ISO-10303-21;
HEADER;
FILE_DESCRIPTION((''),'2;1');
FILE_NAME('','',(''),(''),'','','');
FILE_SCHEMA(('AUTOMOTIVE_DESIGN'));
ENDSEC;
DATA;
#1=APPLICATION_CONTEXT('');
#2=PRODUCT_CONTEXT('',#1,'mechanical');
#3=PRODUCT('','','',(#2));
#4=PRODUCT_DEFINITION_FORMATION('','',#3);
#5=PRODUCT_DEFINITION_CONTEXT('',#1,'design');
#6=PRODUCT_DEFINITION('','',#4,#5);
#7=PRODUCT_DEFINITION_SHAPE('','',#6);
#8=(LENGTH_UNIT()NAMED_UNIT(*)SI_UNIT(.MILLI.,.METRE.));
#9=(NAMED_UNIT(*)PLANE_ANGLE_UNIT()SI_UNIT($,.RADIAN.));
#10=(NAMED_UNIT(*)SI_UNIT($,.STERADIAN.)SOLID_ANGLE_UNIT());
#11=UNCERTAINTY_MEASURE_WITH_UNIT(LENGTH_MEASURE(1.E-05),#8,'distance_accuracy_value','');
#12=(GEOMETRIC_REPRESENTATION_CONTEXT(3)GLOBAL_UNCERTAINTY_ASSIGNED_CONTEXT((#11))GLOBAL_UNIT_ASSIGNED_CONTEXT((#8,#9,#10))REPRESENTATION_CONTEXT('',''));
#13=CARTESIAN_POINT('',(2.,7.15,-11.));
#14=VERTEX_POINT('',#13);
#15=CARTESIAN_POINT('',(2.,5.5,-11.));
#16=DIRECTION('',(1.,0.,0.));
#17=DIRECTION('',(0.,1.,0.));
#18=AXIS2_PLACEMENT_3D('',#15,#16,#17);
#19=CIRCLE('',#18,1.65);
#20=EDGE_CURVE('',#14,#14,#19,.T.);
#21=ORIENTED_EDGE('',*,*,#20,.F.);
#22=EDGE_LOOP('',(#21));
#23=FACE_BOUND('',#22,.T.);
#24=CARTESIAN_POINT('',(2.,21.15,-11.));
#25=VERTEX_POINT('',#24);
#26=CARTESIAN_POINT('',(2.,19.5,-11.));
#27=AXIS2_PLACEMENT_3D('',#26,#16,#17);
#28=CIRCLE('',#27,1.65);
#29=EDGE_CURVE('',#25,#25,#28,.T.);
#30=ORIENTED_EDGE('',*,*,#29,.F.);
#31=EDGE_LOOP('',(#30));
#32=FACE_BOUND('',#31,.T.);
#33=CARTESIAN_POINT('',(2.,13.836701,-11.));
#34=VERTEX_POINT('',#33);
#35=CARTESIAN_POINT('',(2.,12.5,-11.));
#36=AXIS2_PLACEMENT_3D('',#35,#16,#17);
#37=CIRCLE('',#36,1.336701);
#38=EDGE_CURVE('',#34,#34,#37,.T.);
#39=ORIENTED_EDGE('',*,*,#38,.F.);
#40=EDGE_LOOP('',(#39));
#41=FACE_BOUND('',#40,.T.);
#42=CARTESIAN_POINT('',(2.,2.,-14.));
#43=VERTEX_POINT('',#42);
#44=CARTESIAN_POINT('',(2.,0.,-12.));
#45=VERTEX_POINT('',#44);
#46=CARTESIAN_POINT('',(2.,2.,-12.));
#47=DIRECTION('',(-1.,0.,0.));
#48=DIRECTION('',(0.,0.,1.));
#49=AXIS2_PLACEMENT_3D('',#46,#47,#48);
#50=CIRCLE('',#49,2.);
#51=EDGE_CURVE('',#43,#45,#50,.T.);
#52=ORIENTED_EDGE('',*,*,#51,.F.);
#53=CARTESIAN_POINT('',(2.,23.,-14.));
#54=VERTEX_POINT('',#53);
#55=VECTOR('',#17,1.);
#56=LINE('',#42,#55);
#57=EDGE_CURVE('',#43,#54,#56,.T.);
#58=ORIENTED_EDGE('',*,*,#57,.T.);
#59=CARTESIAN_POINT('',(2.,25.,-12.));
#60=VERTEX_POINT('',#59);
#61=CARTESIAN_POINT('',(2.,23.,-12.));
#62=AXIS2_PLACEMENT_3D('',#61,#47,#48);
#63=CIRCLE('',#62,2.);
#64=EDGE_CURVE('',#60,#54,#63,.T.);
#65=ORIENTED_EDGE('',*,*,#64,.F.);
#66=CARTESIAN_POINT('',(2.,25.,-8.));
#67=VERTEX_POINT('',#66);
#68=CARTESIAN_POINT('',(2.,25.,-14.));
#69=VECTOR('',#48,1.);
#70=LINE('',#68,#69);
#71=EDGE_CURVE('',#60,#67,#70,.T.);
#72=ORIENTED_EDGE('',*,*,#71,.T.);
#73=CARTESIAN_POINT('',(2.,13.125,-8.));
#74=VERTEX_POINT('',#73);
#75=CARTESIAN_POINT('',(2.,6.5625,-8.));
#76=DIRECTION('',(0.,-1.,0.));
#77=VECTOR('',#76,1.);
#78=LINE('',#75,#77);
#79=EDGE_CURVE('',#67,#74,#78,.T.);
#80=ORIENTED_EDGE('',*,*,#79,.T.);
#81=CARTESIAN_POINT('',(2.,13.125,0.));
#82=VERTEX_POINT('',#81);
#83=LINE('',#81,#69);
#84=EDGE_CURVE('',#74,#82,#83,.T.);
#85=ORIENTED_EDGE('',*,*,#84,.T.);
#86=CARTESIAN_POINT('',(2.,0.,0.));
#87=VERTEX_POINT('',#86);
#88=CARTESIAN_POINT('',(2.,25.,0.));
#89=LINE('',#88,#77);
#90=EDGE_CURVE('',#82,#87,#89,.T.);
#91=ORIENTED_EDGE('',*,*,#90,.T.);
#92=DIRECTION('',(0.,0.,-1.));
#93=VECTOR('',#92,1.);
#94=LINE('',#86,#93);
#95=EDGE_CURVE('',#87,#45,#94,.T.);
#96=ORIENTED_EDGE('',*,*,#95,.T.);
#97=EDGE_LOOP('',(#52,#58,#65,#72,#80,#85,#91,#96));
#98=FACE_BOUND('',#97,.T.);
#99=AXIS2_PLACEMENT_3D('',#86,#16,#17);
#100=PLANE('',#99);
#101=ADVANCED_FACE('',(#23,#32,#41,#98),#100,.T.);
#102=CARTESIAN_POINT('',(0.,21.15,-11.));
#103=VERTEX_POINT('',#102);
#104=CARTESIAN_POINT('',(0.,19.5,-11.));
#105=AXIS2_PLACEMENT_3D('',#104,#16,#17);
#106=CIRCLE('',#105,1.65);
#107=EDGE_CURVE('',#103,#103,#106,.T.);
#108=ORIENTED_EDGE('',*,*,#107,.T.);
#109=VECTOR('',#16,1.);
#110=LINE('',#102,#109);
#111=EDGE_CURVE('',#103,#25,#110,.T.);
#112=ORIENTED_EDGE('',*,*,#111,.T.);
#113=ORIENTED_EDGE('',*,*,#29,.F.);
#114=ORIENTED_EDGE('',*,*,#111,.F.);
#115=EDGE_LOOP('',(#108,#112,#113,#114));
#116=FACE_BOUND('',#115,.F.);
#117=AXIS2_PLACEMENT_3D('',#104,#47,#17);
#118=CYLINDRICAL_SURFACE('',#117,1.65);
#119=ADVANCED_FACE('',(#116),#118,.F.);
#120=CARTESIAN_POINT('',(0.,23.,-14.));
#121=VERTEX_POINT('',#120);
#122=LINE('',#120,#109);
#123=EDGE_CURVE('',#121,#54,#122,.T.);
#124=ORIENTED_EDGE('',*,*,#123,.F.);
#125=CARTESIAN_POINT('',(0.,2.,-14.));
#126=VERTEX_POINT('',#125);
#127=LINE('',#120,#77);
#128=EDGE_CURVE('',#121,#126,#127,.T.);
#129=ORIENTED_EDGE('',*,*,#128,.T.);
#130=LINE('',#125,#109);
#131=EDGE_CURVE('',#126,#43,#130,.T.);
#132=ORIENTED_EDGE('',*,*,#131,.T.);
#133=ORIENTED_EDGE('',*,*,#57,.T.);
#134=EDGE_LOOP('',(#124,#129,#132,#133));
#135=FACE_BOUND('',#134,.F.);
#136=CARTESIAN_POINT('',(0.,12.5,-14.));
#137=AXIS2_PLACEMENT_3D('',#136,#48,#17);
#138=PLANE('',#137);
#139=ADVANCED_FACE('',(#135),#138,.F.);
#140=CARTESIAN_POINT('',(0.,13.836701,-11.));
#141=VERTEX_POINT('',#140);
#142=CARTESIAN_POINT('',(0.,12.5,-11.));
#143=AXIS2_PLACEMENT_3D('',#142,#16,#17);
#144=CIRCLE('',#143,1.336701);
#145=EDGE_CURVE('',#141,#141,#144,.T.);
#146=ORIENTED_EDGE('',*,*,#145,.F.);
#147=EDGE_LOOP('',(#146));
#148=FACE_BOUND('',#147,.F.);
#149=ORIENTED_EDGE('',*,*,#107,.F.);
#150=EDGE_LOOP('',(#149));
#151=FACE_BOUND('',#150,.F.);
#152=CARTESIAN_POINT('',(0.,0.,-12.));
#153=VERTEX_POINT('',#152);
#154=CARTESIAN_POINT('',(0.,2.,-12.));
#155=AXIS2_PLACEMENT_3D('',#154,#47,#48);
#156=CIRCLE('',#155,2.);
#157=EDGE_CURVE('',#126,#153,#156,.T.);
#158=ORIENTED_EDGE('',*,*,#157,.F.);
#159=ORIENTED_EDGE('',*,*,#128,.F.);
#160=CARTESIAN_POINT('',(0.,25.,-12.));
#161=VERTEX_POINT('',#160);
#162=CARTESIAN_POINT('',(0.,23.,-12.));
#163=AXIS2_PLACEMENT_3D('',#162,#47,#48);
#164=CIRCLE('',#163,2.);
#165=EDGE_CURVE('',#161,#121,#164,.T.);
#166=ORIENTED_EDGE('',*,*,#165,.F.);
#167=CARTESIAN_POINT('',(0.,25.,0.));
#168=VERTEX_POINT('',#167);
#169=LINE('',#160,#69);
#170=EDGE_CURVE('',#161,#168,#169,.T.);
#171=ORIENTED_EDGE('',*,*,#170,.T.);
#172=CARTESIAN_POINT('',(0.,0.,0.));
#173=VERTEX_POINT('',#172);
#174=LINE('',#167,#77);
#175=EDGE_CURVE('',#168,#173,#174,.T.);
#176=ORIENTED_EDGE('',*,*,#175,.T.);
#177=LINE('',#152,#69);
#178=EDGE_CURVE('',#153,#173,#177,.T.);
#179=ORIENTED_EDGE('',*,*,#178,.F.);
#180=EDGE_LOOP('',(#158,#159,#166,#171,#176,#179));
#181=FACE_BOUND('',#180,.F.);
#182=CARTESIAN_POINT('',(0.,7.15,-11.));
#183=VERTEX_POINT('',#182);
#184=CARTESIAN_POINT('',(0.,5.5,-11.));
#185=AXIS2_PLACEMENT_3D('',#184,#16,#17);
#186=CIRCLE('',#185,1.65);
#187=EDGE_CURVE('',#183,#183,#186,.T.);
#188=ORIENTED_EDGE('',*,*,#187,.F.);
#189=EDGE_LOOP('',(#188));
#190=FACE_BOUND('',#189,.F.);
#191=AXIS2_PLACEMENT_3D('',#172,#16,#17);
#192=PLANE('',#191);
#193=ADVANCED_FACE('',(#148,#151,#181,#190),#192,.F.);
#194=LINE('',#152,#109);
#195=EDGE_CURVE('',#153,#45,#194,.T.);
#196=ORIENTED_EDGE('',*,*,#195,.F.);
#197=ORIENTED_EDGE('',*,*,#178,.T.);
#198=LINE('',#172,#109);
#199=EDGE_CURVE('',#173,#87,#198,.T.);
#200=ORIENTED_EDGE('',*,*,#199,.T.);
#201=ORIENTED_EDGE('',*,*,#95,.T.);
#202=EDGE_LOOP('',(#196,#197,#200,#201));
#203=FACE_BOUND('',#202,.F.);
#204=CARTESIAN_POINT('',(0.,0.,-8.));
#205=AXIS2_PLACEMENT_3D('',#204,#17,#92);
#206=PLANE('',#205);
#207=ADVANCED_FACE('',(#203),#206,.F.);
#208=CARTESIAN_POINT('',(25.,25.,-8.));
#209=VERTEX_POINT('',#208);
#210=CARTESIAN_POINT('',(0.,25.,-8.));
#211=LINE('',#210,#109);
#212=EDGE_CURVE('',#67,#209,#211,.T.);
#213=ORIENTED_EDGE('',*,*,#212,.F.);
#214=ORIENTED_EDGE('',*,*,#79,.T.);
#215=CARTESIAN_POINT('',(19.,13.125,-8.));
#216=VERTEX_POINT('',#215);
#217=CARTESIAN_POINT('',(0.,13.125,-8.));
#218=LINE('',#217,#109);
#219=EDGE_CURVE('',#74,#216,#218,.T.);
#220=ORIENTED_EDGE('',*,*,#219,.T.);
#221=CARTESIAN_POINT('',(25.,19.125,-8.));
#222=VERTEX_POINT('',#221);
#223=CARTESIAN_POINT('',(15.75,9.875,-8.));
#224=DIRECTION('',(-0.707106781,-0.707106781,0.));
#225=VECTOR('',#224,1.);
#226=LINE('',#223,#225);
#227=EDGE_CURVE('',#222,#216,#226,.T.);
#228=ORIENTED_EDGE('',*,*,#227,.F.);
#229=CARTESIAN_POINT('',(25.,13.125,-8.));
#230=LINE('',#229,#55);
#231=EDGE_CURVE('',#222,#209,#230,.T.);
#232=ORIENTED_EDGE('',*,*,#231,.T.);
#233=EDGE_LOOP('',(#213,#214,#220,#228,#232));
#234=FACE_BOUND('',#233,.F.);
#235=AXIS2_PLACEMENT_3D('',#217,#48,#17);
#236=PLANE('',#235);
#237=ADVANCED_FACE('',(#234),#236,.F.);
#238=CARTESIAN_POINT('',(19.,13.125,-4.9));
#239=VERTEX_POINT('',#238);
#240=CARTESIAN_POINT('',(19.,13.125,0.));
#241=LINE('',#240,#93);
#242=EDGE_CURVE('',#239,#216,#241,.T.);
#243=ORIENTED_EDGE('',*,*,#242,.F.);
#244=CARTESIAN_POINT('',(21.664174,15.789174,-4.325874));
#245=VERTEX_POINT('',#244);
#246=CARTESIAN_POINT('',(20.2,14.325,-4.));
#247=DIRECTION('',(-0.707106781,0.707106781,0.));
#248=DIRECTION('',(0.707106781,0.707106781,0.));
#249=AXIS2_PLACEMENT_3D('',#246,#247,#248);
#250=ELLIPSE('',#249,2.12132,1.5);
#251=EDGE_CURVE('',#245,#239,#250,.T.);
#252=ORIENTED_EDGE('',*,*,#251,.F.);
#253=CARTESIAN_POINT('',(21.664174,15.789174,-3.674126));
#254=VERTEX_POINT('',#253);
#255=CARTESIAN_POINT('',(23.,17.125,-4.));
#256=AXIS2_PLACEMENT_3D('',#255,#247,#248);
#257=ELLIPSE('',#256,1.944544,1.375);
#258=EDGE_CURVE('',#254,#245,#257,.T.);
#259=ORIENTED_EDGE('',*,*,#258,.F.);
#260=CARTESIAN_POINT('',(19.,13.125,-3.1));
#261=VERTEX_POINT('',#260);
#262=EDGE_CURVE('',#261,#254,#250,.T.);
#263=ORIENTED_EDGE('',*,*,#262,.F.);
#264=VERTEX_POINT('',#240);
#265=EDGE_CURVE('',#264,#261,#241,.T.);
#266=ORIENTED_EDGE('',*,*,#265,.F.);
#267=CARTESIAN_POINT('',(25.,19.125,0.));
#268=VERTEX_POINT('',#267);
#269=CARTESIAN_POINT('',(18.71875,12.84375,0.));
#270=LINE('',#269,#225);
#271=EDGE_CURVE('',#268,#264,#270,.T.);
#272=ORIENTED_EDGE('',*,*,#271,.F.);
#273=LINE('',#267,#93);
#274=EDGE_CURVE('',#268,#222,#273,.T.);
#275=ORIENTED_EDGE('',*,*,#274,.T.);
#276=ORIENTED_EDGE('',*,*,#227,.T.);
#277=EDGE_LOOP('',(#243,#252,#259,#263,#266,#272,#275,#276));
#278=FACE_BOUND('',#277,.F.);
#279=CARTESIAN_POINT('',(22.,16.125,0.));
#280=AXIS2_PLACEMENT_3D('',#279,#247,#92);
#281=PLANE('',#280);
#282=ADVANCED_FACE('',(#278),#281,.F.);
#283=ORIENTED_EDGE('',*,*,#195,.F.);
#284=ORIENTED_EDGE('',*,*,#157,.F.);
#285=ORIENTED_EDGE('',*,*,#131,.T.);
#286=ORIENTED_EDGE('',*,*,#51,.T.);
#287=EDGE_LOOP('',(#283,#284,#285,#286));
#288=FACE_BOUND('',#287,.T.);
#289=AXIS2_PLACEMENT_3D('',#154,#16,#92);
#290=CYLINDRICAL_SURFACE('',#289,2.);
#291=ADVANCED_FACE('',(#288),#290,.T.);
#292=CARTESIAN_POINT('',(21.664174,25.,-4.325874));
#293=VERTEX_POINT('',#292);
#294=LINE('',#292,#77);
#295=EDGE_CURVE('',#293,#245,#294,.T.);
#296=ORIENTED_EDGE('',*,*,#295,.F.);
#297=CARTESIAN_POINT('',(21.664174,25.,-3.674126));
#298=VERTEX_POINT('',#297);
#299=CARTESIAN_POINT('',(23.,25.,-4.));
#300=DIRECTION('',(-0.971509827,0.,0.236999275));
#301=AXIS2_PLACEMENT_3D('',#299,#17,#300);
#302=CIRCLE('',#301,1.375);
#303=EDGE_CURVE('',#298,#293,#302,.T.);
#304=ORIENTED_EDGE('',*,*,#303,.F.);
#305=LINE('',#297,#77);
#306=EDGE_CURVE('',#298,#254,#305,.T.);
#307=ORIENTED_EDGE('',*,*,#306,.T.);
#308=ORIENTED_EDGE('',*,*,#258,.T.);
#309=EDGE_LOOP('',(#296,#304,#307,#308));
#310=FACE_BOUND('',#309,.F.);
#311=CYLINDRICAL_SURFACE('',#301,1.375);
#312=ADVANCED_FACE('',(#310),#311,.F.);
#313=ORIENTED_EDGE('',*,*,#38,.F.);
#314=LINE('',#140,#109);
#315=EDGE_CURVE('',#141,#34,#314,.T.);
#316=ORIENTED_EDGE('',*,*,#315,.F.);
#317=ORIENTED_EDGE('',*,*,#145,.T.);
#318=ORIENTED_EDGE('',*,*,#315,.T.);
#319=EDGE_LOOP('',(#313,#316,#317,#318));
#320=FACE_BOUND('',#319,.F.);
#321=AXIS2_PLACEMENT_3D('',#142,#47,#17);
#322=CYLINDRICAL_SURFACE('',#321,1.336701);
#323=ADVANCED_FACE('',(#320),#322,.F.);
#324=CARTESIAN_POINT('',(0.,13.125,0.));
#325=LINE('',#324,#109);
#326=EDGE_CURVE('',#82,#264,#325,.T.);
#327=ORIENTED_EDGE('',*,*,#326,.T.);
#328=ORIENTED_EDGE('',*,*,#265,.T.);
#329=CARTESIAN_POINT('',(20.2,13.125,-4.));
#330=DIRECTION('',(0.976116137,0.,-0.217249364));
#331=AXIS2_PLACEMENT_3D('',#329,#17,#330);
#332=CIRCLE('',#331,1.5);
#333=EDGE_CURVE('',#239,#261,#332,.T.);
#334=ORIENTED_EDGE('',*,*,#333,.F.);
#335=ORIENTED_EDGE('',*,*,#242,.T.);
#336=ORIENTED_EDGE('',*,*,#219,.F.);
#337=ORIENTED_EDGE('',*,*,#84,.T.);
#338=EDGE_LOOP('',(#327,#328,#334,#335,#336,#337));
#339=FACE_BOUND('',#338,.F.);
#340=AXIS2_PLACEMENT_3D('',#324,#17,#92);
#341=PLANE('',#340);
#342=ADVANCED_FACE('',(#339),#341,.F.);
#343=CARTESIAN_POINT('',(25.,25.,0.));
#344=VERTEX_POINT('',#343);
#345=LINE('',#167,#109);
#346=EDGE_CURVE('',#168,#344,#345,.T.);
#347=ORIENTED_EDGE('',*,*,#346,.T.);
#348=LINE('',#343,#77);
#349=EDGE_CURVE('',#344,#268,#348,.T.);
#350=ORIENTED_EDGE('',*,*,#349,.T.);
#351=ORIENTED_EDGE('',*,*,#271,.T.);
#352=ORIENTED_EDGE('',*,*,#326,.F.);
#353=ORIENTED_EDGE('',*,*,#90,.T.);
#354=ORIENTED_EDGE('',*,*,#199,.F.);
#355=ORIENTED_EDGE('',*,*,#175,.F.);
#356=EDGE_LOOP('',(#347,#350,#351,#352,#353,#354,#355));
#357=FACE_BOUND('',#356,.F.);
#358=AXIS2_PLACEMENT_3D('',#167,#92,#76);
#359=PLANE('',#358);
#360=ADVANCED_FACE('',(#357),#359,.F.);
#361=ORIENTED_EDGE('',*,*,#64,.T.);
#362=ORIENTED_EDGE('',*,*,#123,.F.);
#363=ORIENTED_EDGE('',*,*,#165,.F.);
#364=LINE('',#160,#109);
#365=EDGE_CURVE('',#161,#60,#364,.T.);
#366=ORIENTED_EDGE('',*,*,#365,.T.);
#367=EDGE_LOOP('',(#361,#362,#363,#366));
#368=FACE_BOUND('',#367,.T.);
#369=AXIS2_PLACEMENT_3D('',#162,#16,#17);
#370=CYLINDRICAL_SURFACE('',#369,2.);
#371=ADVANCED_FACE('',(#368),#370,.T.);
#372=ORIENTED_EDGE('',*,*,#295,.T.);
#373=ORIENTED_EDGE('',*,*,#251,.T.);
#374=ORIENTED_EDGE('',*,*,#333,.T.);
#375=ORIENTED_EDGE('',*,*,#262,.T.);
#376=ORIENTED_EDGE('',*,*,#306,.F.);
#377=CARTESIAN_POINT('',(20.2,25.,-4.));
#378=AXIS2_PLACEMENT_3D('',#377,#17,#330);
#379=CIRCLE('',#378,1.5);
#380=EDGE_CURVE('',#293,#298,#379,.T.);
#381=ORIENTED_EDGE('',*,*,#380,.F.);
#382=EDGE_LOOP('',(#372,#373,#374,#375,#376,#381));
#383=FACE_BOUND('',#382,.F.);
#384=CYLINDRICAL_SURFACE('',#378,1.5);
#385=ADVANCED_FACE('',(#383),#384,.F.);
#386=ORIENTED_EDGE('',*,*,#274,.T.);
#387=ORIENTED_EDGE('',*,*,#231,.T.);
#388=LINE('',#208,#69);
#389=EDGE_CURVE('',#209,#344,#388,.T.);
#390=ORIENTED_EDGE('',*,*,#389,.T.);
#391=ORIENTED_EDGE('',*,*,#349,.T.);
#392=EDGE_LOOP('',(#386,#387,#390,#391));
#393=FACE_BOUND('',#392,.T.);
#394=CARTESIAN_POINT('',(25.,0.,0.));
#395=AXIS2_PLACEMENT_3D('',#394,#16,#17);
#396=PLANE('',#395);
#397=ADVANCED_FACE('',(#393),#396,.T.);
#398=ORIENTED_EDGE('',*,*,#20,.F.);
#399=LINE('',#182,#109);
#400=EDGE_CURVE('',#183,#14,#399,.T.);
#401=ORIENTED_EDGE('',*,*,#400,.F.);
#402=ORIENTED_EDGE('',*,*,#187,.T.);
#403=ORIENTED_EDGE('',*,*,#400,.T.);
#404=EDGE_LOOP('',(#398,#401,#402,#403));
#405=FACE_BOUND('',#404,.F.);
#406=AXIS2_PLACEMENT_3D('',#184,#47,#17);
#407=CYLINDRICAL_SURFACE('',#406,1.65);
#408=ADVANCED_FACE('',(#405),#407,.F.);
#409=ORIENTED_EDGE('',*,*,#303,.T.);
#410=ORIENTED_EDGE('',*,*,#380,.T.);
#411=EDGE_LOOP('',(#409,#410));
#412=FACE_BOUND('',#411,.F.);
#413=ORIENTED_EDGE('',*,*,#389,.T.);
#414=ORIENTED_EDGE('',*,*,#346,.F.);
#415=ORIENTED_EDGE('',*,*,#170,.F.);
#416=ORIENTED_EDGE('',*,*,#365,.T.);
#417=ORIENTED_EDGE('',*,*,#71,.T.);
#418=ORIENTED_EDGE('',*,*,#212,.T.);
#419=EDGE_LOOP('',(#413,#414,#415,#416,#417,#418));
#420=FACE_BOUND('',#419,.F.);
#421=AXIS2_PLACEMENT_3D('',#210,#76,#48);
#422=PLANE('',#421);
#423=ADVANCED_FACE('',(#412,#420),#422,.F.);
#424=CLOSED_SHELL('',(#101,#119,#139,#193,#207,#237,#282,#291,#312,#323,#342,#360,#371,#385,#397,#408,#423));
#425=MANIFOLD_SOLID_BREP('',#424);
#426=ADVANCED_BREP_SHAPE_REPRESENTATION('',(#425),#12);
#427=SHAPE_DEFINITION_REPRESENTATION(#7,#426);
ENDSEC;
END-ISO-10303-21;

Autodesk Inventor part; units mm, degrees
ref_plane "YZ Plane" through (0, 0, 0) normal (1, 0, 0) x (0, 1, 0)
ref_plane "XZ Plane" through (0, 0, 0) normal (0, 1, 0) x (-1, 0, 0)
ref_plane "XY Plane" through (0, 0, 0) normal (0, 0, 1) x (1, 0, 0)
sketch "Sketch1" plane through (0, 0, 0) normal (1, 0, 0) x (0, 1, 0)
  line L0 (0, 0) -> (25, 0)
  line L1 (25, 0) -> (25, -8)
  line L2 (25, -8) -> (0, -8)
  line L3 (0, -8) -> (0, 0)
  line L4 (25, -8) -> (12.5, -8)
  line L5 (12.5, -8) -> (12.5, -14)
  line L6 (12.5, -14) -> (25, -14)
  line L7 (25, -14) -> (25, -8)
  line L8 (0, -8) -> (12.5, -8)
  line L9 (12.5, -8) -> (12.5, -14)
  line L10 (12.5, -14) -> (0, -14)
  line L11 (0, -14) -> (0, -8)
  line L12 (25, 0) -> (13.125, 0)
  line L13 (13.125, 0) -> (13.125, -8)
  line L14 (13.125, -8) -> (25, -8)
  line L15 (25, -8) -> (25, 0)
  line L16 (19.5, -11) -> (5.5, -11) construction
  circle A0 centre (19.5, -11) radius 1.65
  circle A1 centre (5.5, -11) radius 1.65
  circle A2 centre (12.5, -11) radius 1.336701
  point P0 (12.5, -8)
  point P1 (25, -11)
  point P2 (12.5, -8)
  point P3 (12.5, -8)
  point P4 (13.125, 0)
  dimension "d0" = 0.625
  dimension "d1" = 14
  dimension "d2" = 25
  dimension "d3" = 12.5
  dimension "d4" = 12.5
  dimension "d6" = 3
  dimension "d7" = 0
  dimension "d8" = 8
  dimension "d11" = 3.3
  dimension "d12" = 3.3
  dimension "d28" = 5.5
sketch "Sketch1 outline for Extrusion1" plane through (0, 0, 0) normal (1, 0, 0) x (0, 1, 0)
  line L0 (0, 0) -> (0, -8)
  line L1 (25, 0) -> (0, 0)
  line L2 (0, -8) -> (0, -14)
  line L3 (25, -8) -> (25, 0)
  line L4 (0, -14) -> (12.5, -14)
  line L5 (25, -14) -> (25, -8)
  line L6 (12.5, -14) -> (25, -14)
  circle A0 centre (5.5, -11) radius 1.65
  circle A1 centre (12.5, -11) radius 1.336701
  circle A2 centre (19.5, -11) radius 1.65
extrude "Extrusion1" add sketch "Sketch1 outline for Extrusion1" along normal blind 2
fillet "Fillet1" radius 2 3 edges at (1, 25, -14) (1, 12.5, -14) (1, 0, -14)
sketch "Sketch1 outline for Extrusion2" plane through (0, 0, 0) normal (1, 0, 0) x (0, 1, 0)
  line L0 (13.125, 0) -> (13.125, -8)
  line L1 (25, 0) -> (13.125, 0)
  line L2 (25, -8) -> (25, 0)
  line L3 (13.125, -8) -> (25, -8)
extrude "Extrusion2" add sketch "Sketch1 outline for Extrusion2" along normal blind 25
chamfer "Chamfer1" distance 6 angle 45 1 edges at (25, 13.125, -4)
sketch "Sketch2" plane through (0, 25, 0) normal (0, 1, 0) x (1, 0, 0)
  line L0 (20.2, 4) -> (23, 4) construction
  line L1 (2, 8) -> (25, 8) projected
  line L2 (0, 0) -> (25, 0) projected
  circle A0 centre (20.2, 4) radius 1.5
  circle A1 centre (23, 4) radius 1.45
  circle A2 centre (23, 4) radius 1.375
  line L3 (25, 8) -> (25, 0) projected
  point P0 (2, 4.5)
  point P1 (21.664174, 3.674126)
  point P2 (21.664174, 4.325874)
  dimension "d19" = 8
  dimension "d20" = 4
  dimension "d21" = 3
  dimension "d22" = 2.9
  dimension "d23" = 2.75
  dimension "d24" = 2
  dimension "d25" = 2.8
sketch "Sketch2 outline for Extrusion3" plane through (0, 25, 0) normal (0, 1, 0) x (1, 0, 0)
  arc A0 (21.664174, 4.325874) -> (21.664174, 3.674126) centre (20.2, 4) ccw
  arc A1 (21.664174, 3.674126) -> (21.664174, 4.325874) centre (23, 4) ccw
extrude "Extrusion3" cut sketch "Sketch2 outline for Extrusion3" against normal blind 12.5
equation "\"d3\" = 0.5 * d2"
equation "\"d4\" = d3"
equation "\"d6\" = d5"
equation "\"d12\" = d11"
equation "\"d28\" = -0.5 * d1 + 0.5 * d2"
equation "\"d20\" = 0.5 * d19"
equation "\"d5\" = 3"
properties part number "Futaba Antenna Mount"
